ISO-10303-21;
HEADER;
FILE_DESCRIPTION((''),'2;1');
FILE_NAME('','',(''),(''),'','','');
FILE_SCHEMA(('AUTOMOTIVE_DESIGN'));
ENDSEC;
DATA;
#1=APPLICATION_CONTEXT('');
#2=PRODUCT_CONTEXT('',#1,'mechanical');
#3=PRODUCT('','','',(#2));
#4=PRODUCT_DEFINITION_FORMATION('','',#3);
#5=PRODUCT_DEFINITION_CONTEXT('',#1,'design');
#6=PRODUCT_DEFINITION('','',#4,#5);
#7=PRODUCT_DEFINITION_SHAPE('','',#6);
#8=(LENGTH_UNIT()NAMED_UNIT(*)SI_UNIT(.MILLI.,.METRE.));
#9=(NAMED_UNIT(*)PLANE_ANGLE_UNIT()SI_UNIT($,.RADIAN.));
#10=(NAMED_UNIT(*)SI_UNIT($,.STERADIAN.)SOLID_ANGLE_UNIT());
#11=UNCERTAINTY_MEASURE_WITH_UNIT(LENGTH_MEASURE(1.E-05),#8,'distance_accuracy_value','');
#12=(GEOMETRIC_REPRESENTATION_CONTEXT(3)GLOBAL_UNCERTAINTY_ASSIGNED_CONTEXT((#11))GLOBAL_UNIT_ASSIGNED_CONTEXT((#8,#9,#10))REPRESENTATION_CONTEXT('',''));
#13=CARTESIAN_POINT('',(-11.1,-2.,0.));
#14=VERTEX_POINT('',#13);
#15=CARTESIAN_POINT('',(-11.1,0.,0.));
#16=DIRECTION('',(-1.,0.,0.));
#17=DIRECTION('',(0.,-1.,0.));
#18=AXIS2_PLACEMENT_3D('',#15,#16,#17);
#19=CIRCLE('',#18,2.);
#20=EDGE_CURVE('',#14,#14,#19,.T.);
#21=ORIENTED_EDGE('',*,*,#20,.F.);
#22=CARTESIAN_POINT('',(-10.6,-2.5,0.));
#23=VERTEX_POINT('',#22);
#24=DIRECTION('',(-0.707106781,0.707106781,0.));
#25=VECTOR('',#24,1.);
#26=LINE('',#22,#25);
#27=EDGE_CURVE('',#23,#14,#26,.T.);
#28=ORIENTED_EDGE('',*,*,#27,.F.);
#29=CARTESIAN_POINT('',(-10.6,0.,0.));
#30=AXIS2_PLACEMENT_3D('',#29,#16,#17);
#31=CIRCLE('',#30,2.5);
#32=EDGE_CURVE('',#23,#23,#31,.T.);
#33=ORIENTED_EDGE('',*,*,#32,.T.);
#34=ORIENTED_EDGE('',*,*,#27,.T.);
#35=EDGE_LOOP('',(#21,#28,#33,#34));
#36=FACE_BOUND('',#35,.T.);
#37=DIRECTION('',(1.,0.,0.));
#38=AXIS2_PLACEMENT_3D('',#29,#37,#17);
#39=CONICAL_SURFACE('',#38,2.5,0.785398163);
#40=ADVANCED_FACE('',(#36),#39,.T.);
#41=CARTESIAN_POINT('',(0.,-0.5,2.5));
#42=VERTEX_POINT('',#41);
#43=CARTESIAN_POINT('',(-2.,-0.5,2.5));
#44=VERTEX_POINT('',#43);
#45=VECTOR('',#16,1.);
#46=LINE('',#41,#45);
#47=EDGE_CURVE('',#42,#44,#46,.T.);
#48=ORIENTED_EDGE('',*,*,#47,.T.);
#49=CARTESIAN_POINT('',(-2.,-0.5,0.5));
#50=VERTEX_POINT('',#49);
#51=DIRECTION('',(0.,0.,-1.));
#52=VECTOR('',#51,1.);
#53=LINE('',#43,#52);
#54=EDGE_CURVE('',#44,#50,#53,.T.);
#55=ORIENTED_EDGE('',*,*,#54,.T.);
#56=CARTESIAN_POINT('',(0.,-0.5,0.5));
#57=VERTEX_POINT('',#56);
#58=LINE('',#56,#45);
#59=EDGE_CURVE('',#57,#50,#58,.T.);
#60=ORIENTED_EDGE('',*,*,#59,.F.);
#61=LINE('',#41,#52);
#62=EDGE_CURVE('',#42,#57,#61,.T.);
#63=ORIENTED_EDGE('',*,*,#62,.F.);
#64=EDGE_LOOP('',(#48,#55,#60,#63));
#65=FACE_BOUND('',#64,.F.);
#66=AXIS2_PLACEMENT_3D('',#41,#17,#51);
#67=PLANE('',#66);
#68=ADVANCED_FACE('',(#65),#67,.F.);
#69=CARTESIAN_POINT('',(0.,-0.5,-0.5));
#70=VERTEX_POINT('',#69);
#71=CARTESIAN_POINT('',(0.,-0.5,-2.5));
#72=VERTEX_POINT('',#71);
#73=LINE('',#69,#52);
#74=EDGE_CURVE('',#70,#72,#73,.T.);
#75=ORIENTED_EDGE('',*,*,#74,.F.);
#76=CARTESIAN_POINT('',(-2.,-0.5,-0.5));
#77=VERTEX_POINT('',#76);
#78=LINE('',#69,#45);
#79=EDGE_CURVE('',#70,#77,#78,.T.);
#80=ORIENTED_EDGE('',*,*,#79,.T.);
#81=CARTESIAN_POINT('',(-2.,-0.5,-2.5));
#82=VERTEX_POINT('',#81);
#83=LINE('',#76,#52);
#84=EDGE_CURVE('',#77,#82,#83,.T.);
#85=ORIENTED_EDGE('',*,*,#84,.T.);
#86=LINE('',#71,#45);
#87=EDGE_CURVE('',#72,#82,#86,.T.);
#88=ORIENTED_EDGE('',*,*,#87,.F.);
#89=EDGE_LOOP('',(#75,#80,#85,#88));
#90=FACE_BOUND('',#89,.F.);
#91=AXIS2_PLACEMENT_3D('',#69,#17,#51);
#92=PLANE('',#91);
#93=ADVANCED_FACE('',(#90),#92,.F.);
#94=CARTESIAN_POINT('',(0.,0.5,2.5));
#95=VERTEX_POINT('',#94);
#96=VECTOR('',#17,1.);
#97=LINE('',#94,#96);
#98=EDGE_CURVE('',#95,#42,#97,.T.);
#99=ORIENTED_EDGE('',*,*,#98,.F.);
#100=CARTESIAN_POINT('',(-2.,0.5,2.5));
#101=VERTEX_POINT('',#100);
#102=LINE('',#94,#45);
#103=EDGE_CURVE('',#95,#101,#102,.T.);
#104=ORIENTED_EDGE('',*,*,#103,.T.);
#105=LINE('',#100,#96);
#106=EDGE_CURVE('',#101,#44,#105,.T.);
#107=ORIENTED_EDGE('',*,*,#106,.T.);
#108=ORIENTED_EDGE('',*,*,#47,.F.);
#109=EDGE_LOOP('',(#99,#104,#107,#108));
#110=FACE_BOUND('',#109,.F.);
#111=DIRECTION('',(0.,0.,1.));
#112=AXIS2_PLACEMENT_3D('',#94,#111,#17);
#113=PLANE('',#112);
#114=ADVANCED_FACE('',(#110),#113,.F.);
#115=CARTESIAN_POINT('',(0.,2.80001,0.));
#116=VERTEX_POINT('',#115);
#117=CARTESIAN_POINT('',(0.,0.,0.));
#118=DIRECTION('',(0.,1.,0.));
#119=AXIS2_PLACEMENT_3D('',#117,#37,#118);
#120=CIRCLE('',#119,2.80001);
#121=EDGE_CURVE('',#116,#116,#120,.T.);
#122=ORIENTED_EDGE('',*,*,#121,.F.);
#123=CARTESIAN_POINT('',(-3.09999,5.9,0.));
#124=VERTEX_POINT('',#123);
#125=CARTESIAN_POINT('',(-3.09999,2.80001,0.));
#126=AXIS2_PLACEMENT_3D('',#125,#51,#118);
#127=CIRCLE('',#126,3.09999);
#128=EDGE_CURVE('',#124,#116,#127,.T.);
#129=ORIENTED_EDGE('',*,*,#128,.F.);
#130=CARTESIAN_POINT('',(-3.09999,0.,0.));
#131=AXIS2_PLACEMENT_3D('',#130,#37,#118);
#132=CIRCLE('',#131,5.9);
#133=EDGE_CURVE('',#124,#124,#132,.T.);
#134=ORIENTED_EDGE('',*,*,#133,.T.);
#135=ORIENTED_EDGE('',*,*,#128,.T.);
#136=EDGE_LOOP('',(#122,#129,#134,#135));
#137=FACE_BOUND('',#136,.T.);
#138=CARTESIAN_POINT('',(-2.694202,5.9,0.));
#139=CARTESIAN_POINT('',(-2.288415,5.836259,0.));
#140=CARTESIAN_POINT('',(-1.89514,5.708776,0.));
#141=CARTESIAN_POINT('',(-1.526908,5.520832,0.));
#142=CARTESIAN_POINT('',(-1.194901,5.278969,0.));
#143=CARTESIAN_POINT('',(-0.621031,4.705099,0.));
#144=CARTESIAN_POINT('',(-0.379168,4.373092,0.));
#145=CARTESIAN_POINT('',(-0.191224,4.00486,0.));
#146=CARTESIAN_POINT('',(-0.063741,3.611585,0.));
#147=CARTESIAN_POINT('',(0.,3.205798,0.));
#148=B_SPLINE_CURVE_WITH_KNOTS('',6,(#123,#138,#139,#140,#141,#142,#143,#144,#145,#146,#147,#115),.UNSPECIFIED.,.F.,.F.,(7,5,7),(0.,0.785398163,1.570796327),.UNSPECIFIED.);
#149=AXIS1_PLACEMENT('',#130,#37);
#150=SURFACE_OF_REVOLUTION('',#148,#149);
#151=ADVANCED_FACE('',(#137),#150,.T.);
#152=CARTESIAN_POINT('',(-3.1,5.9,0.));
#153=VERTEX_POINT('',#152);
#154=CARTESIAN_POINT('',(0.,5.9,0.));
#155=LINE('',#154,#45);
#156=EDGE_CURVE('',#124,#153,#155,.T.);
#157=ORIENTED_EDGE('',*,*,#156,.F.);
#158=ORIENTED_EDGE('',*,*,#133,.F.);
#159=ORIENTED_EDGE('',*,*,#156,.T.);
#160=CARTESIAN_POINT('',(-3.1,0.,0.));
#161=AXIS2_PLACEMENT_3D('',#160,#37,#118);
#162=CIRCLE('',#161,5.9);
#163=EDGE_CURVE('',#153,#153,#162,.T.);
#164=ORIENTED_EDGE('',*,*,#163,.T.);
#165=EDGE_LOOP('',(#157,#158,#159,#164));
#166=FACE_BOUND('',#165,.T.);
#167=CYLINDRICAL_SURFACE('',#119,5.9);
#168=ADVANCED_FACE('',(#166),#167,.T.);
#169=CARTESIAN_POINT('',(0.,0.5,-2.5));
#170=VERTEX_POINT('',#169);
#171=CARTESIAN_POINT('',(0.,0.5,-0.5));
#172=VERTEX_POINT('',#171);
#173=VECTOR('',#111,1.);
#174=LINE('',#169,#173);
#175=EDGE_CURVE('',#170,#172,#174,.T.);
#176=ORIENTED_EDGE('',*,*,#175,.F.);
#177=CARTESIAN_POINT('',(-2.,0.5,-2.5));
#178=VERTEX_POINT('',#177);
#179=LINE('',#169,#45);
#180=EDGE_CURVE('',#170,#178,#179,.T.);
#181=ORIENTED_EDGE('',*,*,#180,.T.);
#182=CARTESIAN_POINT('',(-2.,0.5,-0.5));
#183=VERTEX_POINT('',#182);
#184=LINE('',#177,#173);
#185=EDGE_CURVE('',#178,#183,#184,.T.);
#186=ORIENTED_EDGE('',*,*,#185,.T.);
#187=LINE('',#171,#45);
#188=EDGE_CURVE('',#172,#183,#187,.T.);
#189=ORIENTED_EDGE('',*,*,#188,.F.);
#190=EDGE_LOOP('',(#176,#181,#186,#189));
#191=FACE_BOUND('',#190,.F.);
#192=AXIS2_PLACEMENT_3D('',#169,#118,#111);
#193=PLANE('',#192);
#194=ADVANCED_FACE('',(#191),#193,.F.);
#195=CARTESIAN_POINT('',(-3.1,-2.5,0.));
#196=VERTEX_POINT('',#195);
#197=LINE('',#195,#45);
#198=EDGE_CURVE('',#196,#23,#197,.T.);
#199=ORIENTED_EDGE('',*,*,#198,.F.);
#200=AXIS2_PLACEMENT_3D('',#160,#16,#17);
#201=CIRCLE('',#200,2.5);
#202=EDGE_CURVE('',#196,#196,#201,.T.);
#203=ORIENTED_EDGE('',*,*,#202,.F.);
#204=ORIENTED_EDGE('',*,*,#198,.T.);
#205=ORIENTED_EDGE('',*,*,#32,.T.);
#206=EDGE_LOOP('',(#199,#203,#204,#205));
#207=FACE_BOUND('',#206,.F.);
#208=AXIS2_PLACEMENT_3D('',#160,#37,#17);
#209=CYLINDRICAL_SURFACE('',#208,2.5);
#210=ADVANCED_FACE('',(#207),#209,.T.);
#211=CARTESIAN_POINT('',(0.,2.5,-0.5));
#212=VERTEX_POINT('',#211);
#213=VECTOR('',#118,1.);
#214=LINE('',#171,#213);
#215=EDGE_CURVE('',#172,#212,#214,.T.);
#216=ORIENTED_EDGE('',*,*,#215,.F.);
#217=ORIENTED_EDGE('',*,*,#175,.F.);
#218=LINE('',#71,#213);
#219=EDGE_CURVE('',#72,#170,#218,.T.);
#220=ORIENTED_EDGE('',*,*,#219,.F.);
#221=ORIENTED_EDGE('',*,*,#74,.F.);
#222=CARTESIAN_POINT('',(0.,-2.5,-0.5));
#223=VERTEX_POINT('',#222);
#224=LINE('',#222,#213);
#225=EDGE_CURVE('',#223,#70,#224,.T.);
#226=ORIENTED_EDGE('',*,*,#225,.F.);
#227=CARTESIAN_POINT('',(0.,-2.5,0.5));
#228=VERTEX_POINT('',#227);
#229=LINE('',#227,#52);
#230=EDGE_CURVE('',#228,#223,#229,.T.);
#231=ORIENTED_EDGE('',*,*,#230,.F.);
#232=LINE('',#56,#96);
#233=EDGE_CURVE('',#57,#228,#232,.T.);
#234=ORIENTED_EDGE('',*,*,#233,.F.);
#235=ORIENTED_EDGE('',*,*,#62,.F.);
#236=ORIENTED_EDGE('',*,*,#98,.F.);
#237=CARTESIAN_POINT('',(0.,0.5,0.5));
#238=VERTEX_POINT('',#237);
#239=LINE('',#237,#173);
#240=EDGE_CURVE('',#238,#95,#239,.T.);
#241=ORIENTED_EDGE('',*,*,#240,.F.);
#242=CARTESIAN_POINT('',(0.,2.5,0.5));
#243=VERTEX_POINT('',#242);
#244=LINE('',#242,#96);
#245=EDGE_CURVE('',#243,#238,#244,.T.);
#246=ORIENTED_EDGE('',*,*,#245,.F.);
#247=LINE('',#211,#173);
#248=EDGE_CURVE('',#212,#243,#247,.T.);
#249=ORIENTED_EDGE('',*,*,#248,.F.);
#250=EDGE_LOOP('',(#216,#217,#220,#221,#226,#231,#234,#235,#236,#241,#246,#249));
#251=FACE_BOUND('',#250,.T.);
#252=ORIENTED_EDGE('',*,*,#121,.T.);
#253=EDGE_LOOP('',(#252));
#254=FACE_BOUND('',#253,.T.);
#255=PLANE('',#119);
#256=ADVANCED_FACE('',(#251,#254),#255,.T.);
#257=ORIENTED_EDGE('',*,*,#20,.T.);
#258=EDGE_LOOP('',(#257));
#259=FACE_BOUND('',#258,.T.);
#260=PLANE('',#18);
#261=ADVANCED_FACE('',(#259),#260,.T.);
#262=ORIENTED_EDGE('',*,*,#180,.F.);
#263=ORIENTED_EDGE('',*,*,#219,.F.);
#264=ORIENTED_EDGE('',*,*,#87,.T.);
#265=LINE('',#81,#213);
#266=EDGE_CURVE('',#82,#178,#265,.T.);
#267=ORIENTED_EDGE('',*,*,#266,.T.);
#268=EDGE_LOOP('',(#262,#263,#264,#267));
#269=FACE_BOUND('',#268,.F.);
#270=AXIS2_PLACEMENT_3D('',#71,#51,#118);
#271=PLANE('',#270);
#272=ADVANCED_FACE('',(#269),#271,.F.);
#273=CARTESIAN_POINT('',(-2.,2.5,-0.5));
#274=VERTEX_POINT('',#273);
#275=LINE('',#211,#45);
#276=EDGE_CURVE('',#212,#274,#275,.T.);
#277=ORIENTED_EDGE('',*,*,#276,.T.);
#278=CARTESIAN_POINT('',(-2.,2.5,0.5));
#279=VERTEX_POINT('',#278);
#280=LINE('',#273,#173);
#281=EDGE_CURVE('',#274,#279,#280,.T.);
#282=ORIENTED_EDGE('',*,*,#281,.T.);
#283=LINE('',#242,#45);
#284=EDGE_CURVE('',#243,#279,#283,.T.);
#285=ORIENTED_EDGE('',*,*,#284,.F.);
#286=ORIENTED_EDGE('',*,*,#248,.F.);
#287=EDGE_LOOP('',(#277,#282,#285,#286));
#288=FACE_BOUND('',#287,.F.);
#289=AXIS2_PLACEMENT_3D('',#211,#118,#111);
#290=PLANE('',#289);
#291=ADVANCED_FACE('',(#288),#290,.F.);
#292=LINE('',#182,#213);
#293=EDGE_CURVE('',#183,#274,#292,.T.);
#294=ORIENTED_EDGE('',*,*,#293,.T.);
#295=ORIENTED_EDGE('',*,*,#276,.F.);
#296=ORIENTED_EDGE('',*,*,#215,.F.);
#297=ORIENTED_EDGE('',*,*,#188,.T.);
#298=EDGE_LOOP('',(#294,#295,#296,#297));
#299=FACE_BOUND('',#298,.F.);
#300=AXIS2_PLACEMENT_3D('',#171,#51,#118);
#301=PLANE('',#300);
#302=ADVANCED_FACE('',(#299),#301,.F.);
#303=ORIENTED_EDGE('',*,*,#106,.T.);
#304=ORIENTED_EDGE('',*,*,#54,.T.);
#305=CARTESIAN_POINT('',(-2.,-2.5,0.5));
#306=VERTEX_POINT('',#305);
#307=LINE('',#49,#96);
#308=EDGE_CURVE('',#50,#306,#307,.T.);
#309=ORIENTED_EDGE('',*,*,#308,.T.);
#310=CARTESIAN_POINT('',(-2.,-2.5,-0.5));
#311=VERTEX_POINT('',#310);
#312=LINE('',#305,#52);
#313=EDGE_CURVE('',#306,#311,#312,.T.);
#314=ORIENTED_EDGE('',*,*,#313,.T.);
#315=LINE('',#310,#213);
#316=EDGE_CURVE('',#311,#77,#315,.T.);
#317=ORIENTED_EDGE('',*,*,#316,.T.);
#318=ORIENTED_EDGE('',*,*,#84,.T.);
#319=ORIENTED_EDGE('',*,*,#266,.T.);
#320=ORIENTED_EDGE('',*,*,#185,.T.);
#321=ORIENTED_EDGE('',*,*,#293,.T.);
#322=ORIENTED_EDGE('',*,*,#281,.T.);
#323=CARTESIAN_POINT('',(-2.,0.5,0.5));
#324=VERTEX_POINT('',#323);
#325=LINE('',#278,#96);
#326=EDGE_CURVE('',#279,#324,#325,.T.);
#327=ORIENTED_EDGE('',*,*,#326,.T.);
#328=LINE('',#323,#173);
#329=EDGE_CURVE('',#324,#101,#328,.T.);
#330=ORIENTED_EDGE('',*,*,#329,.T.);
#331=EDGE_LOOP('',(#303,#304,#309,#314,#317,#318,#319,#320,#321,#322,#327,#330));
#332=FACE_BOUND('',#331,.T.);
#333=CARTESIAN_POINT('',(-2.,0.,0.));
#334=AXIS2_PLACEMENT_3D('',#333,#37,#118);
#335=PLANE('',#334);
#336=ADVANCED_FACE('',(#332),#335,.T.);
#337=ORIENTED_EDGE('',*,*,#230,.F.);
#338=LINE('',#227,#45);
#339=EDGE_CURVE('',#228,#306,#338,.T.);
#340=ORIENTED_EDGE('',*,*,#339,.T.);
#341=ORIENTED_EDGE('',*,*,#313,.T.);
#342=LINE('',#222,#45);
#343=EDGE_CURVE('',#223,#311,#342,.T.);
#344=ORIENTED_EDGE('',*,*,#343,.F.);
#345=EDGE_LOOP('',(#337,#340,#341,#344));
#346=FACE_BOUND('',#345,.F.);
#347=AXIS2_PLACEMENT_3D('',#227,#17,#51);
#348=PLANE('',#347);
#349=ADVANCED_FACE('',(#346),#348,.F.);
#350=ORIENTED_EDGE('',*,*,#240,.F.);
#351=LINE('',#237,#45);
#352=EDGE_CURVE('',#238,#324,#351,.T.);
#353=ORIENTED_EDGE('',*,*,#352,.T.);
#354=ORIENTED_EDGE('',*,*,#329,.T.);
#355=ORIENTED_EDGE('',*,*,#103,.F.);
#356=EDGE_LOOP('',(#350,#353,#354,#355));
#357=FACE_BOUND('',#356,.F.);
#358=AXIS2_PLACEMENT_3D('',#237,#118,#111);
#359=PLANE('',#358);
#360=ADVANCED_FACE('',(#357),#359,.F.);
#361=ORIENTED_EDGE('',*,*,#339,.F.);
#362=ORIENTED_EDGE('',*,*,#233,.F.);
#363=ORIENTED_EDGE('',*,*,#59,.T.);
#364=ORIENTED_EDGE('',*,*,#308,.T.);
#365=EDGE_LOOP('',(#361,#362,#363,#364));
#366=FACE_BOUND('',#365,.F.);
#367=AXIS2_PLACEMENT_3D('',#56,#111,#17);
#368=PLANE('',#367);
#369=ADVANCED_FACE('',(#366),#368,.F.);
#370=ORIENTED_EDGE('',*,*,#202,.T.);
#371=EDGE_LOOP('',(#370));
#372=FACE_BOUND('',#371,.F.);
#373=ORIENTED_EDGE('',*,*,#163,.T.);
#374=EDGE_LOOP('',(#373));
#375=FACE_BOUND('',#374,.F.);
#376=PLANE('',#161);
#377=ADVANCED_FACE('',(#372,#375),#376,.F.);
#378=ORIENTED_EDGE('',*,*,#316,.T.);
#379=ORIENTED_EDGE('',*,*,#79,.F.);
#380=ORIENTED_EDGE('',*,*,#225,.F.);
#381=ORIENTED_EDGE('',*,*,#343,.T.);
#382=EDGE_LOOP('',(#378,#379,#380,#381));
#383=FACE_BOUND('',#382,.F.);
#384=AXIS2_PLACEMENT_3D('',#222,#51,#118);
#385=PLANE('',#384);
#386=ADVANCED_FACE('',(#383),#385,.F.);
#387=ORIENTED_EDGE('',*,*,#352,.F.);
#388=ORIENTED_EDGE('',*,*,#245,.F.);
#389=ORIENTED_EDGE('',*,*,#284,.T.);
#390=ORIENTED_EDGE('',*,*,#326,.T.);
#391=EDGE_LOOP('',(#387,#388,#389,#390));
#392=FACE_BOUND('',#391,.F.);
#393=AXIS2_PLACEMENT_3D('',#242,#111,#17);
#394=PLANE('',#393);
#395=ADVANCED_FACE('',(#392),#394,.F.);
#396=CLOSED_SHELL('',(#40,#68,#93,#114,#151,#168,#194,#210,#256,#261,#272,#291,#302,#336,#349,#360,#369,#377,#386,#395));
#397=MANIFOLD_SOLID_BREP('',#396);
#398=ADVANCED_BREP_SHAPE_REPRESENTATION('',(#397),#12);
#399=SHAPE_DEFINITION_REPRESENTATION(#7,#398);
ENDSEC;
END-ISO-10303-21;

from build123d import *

# Parameters (mm, degrees)
F0_R     = 5.9
F1_DEPTH = 3.1
F2_R     = 3.09999
F4_DEPTH = 2
F5_R     = 2.5
F6_DEPTH = 8
F7_SIZE  = 0.5


# Not quite as in the source:
# - a fillet or chamfer is up to 0.001 mm smaller than in the source, because OpenCascade refuses the exact size


with BuildPart() as f1:
    # F0 (on Right) → F1 (new body)
    with BuildSketch(Plane.YZ):
        Circle(F0_R)
    extrude(amount=-F1_DEPTH)

    # F2 (radius 3.1 in the source; OpenCascade refuses exactly that, so slightly less here)
    f2_edges = [f1.edges().sort_by_distance(p)[0] for p in [
        (0, -5.9, 0),
    ]]
    fillet(f2_edges, radius=F2_R)

    # F3 (on face) → F4 (cut)
    with BuildSketch(Plane.YZ):
        Polygon((0.5, 2.5), (0, 2.5), (-0.5, 2.5), (-0.5, 0.5), (-2.5, 0.5), (-2.5, 0), (-2.5, -0.5), (-0.5, -0.5), (-0.5, -2.5), (0, -2.5), (0.5, -2.5), (0.5, -0.5), (2.5, -0.5), (2.5, 0), (2.5, 0.5), (0.5, 0.5), align=None)
    extrude(amount=-F4_DEPTH, mode=Mode.SUBTRACT)

    # F5 (on face) → F6 (join)
    with BuildSketch(Plane(origin=(-3.1, 0, 0), x_dir=(0, -1, 0), z_dir=(-1, 0, 0))):
        Circle(F5_R)
    extrude(amount=F6_DEPTH)

    # F7
    f7_edges = [f1.edges().sort_by_distance(p)[0] for p in [
        (-11.1, 2.5, 0),
    ]]
    chamfer(f7_edges, length=F7_SIZE)


solid = f1.part
